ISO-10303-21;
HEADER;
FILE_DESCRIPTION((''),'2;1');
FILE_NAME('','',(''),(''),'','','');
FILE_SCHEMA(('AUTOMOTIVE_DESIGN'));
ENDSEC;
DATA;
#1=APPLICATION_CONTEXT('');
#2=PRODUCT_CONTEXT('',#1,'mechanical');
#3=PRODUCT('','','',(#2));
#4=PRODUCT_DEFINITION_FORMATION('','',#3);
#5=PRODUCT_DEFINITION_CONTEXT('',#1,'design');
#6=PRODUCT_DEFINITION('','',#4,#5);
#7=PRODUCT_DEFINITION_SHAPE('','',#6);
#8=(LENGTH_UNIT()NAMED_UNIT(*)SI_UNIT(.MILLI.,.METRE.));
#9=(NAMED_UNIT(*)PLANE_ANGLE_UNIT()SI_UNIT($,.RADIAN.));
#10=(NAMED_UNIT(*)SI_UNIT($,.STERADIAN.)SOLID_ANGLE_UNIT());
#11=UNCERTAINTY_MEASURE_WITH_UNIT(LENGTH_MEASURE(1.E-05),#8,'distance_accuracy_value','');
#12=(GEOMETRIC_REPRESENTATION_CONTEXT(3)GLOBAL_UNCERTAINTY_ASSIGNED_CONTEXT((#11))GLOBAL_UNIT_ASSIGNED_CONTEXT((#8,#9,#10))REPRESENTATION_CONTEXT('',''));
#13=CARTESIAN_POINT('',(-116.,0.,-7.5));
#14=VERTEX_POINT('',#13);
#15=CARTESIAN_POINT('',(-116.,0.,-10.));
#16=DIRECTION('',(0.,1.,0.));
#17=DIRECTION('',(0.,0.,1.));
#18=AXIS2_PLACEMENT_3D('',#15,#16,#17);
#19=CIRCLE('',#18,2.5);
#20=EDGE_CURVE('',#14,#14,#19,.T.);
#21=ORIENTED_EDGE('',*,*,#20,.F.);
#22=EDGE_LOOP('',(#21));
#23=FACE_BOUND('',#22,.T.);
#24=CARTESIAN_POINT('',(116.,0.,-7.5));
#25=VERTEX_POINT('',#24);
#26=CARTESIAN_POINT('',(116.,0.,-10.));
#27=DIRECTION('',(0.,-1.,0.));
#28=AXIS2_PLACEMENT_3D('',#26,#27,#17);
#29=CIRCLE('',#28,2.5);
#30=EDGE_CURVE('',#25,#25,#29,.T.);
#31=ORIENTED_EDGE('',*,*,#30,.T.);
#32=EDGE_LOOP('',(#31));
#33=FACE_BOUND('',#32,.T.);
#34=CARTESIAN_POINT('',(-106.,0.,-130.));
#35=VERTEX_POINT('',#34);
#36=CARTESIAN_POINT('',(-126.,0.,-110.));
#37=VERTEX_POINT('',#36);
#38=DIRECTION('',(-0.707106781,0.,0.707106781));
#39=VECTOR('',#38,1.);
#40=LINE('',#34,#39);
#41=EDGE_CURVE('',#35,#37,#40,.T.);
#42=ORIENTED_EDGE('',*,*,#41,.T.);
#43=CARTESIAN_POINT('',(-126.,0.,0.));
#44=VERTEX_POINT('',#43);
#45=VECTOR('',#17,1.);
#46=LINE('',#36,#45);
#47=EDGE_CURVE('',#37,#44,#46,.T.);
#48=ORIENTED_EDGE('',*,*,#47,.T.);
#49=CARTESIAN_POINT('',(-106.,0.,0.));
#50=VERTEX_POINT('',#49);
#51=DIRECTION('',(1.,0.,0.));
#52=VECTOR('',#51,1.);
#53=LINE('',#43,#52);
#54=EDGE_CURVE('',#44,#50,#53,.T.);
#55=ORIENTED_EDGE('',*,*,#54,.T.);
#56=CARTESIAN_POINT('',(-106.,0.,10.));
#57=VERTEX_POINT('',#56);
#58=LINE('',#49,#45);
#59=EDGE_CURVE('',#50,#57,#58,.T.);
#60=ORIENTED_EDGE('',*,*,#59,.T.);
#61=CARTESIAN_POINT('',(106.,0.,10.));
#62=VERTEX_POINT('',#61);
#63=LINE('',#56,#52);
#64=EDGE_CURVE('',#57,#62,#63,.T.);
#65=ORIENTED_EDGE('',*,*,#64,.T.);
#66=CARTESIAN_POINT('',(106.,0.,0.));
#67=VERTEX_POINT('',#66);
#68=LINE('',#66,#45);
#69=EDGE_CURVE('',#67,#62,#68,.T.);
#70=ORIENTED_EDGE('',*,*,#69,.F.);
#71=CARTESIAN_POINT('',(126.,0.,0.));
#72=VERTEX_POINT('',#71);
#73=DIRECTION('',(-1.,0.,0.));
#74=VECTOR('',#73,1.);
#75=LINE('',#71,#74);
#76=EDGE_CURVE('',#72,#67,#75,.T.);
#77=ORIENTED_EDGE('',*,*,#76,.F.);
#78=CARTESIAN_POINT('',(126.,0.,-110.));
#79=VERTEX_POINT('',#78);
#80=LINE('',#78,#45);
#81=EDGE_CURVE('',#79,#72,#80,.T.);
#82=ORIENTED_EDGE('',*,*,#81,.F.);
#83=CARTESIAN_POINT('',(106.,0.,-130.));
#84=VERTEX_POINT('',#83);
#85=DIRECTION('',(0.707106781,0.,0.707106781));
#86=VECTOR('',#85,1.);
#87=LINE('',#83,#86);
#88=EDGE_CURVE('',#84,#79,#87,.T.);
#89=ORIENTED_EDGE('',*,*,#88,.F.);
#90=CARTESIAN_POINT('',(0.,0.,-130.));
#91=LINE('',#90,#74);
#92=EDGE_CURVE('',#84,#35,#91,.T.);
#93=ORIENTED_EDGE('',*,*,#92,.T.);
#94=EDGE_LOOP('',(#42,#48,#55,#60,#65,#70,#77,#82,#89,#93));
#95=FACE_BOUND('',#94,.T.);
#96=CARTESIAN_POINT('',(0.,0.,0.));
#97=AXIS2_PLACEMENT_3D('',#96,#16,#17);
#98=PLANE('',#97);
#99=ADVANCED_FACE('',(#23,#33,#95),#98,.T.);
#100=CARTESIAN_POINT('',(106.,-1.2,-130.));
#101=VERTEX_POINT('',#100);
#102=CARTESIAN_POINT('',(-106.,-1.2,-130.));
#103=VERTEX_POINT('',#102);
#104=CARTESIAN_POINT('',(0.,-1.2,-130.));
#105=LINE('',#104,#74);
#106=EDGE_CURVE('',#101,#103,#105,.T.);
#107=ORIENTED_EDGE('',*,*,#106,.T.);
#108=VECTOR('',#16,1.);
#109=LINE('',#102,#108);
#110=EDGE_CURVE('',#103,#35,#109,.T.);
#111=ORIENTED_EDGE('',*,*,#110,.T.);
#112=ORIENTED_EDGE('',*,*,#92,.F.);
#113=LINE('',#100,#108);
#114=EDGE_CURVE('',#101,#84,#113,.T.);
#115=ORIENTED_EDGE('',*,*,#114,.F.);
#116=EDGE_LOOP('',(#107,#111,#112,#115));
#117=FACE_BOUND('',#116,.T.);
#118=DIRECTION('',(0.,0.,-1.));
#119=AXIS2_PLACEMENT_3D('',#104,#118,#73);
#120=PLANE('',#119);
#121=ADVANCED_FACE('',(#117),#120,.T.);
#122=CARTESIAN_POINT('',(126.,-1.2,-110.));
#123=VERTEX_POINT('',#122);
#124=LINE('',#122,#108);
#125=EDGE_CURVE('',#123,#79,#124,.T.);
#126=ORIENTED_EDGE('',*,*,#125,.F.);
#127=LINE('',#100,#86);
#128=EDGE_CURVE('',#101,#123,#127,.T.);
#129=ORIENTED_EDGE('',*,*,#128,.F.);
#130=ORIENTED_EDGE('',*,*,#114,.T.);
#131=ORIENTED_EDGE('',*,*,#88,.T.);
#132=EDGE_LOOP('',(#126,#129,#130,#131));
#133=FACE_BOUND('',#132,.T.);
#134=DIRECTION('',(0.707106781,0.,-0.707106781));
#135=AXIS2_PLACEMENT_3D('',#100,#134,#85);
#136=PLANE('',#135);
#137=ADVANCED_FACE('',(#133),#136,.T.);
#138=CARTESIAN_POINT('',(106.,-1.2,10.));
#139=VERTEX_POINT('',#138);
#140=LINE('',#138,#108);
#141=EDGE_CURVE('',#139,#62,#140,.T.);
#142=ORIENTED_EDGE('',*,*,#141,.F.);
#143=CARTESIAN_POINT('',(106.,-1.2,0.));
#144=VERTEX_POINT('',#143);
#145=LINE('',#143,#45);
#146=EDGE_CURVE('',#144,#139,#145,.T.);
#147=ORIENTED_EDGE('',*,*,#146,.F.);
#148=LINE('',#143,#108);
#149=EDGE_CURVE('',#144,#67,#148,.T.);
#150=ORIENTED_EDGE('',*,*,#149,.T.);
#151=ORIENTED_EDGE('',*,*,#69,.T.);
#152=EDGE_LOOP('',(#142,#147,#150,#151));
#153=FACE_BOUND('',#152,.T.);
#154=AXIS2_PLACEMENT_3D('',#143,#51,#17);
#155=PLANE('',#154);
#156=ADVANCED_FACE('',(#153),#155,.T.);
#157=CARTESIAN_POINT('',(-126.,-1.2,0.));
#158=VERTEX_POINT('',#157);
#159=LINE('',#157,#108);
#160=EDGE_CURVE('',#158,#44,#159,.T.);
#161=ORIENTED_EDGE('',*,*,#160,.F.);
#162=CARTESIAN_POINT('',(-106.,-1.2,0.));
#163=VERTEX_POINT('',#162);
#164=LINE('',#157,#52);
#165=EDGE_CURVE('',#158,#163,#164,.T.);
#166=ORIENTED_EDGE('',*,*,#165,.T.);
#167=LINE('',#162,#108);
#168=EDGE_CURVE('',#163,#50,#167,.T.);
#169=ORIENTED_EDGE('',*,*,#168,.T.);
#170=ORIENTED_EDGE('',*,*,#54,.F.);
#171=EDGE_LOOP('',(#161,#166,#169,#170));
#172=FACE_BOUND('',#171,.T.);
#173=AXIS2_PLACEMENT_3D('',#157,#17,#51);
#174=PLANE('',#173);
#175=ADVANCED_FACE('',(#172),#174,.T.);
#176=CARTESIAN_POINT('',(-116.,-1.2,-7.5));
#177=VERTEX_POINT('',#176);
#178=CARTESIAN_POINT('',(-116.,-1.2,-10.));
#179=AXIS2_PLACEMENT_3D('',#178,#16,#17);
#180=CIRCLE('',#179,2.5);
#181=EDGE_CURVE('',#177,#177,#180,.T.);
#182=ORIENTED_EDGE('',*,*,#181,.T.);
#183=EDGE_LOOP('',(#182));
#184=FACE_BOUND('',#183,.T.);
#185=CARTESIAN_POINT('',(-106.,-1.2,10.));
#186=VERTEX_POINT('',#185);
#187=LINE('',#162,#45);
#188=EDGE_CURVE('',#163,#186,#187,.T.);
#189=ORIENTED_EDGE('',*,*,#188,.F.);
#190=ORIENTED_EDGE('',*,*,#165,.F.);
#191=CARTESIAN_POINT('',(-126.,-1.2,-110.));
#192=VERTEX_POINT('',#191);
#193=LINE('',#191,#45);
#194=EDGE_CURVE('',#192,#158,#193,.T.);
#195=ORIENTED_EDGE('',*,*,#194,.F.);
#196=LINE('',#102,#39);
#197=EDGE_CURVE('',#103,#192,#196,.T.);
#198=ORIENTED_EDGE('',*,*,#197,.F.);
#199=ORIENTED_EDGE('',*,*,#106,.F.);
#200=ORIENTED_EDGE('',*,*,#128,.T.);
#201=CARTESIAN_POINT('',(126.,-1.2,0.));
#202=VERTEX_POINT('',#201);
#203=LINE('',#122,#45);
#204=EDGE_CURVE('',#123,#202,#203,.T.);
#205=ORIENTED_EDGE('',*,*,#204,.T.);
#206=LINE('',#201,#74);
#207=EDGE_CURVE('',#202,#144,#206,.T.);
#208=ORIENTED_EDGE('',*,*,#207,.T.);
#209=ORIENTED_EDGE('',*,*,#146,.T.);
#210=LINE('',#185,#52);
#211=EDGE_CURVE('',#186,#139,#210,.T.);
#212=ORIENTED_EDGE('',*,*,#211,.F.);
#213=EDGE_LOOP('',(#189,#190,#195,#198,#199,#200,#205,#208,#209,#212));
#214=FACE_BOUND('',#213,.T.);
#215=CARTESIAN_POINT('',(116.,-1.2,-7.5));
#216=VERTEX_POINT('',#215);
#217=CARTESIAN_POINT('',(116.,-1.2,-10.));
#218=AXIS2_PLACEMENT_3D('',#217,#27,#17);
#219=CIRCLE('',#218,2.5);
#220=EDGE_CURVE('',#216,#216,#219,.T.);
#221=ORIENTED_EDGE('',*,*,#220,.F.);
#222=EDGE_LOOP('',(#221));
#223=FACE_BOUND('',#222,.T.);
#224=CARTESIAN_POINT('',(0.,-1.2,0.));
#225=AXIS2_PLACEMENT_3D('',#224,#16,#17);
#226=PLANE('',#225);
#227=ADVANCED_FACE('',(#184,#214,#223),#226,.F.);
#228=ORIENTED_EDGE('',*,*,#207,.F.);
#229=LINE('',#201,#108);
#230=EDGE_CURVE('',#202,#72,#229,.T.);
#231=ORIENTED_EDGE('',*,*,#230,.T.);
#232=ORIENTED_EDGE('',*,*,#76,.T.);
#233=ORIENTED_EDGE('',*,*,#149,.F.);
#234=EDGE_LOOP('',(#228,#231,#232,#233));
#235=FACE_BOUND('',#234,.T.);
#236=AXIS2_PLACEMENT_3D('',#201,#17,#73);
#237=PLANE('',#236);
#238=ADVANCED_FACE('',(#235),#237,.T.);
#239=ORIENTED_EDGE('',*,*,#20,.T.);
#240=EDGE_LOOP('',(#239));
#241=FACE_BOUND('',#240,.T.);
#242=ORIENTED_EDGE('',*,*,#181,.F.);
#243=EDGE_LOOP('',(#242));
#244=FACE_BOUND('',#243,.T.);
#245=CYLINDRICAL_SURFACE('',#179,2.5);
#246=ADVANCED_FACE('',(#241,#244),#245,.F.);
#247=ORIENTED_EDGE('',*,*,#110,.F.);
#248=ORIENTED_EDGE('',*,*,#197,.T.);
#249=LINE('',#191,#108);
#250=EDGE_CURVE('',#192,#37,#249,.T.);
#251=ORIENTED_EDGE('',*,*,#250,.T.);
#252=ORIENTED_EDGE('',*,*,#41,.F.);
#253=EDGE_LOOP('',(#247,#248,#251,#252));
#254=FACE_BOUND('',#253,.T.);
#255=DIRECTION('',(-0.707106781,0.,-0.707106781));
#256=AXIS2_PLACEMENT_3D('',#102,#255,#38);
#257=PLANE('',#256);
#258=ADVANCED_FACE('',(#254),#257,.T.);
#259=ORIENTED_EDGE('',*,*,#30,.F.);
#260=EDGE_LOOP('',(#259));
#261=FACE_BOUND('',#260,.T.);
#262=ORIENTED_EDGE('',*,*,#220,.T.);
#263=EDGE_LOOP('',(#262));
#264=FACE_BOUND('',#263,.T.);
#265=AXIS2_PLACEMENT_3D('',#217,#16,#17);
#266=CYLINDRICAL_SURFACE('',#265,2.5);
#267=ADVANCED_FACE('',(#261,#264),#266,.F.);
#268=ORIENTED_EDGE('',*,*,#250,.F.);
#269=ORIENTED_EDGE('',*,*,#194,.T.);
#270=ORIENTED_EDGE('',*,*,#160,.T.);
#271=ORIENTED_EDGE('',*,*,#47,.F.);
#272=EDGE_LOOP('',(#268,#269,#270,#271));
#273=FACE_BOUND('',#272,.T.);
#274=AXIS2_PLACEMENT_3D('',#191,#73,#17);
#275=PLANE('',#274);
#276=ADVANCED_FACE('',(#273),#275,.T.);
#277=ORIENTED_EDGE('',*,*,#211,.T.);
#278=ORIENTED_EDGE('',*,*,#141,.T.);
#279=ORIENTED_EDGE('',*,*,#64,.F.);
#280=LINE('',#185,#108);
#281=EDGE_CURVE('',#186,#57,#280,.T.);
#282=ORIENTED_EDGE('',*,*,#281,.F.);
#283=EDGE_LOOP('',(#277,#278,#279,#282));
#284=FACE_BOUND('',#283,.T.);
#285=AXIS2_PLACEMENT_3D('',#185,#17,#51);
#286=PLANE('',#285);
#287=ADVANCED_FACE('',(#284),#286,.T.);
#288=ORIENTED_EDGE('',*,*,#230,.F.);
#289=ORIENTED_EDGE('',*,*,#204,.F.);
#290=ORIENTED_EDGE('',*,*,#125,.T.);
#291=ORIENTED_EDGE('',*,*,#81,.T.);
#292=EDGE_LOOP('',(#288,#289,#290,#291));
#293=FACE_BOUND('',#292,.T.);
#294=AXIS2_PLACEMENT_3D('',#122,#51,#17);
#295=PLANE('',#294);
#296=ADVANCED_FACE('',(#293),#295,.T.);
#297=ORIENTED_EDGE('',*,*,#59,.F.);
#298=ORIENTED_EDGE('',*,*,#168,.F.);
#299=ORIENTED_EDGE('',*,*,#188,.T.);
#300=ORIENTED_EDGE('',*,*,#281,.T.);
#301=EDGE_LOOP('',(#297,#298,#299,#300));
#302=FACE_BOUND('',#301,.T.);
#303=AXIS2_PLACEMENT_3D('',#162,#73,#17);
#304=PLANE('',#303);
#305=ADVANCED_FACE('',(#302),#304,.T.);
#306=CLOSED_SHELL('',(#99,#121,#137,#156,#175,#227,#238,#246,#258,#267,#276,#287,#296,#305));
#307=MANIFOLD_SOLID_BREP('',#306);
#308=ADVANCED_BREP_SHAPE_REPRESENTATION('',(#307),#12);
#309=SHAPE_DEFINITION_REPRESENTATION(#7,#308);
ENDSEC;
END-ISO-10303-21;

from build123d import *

# Parameters (mm, degrees)
SKETCH_1_R             = 2.5
SM_BASE_FLANGE_1_DEPTH = 1.2


# Sheet-metal steps are written as plain solids
with BuildPart() as part:
    # Sketch 1 → 基材-凸緣1 (new body)
    with BuildSketch(Plane(origin=(0, 0, 0), x_dir=(1, 0, 0), z_dir=(0, 1, 0))):
        Polygon((-126, 0), (-106, 0), (-106, -10), (0, -10), (0, 130), (-106, 130), (-126, 110), align=None)
        with Locations(Location((-116, 10, 0), (0, 0, 270))):
            Circle(SKETCH_1_R, mode=Mode.SUBTRACT)
    extrude(amount=-SM_BASE_FLANGE_1_DEPTH)

    # 鏡射1: part across face


with BuildPart() as part_1:
    add(part.part)
    add(part.part.mirror(Plane(origin=(0, -0.6, -60), x_dir=(0, 0, 1), z_dir=(1, 0, 0))))


solid = part_1.part
